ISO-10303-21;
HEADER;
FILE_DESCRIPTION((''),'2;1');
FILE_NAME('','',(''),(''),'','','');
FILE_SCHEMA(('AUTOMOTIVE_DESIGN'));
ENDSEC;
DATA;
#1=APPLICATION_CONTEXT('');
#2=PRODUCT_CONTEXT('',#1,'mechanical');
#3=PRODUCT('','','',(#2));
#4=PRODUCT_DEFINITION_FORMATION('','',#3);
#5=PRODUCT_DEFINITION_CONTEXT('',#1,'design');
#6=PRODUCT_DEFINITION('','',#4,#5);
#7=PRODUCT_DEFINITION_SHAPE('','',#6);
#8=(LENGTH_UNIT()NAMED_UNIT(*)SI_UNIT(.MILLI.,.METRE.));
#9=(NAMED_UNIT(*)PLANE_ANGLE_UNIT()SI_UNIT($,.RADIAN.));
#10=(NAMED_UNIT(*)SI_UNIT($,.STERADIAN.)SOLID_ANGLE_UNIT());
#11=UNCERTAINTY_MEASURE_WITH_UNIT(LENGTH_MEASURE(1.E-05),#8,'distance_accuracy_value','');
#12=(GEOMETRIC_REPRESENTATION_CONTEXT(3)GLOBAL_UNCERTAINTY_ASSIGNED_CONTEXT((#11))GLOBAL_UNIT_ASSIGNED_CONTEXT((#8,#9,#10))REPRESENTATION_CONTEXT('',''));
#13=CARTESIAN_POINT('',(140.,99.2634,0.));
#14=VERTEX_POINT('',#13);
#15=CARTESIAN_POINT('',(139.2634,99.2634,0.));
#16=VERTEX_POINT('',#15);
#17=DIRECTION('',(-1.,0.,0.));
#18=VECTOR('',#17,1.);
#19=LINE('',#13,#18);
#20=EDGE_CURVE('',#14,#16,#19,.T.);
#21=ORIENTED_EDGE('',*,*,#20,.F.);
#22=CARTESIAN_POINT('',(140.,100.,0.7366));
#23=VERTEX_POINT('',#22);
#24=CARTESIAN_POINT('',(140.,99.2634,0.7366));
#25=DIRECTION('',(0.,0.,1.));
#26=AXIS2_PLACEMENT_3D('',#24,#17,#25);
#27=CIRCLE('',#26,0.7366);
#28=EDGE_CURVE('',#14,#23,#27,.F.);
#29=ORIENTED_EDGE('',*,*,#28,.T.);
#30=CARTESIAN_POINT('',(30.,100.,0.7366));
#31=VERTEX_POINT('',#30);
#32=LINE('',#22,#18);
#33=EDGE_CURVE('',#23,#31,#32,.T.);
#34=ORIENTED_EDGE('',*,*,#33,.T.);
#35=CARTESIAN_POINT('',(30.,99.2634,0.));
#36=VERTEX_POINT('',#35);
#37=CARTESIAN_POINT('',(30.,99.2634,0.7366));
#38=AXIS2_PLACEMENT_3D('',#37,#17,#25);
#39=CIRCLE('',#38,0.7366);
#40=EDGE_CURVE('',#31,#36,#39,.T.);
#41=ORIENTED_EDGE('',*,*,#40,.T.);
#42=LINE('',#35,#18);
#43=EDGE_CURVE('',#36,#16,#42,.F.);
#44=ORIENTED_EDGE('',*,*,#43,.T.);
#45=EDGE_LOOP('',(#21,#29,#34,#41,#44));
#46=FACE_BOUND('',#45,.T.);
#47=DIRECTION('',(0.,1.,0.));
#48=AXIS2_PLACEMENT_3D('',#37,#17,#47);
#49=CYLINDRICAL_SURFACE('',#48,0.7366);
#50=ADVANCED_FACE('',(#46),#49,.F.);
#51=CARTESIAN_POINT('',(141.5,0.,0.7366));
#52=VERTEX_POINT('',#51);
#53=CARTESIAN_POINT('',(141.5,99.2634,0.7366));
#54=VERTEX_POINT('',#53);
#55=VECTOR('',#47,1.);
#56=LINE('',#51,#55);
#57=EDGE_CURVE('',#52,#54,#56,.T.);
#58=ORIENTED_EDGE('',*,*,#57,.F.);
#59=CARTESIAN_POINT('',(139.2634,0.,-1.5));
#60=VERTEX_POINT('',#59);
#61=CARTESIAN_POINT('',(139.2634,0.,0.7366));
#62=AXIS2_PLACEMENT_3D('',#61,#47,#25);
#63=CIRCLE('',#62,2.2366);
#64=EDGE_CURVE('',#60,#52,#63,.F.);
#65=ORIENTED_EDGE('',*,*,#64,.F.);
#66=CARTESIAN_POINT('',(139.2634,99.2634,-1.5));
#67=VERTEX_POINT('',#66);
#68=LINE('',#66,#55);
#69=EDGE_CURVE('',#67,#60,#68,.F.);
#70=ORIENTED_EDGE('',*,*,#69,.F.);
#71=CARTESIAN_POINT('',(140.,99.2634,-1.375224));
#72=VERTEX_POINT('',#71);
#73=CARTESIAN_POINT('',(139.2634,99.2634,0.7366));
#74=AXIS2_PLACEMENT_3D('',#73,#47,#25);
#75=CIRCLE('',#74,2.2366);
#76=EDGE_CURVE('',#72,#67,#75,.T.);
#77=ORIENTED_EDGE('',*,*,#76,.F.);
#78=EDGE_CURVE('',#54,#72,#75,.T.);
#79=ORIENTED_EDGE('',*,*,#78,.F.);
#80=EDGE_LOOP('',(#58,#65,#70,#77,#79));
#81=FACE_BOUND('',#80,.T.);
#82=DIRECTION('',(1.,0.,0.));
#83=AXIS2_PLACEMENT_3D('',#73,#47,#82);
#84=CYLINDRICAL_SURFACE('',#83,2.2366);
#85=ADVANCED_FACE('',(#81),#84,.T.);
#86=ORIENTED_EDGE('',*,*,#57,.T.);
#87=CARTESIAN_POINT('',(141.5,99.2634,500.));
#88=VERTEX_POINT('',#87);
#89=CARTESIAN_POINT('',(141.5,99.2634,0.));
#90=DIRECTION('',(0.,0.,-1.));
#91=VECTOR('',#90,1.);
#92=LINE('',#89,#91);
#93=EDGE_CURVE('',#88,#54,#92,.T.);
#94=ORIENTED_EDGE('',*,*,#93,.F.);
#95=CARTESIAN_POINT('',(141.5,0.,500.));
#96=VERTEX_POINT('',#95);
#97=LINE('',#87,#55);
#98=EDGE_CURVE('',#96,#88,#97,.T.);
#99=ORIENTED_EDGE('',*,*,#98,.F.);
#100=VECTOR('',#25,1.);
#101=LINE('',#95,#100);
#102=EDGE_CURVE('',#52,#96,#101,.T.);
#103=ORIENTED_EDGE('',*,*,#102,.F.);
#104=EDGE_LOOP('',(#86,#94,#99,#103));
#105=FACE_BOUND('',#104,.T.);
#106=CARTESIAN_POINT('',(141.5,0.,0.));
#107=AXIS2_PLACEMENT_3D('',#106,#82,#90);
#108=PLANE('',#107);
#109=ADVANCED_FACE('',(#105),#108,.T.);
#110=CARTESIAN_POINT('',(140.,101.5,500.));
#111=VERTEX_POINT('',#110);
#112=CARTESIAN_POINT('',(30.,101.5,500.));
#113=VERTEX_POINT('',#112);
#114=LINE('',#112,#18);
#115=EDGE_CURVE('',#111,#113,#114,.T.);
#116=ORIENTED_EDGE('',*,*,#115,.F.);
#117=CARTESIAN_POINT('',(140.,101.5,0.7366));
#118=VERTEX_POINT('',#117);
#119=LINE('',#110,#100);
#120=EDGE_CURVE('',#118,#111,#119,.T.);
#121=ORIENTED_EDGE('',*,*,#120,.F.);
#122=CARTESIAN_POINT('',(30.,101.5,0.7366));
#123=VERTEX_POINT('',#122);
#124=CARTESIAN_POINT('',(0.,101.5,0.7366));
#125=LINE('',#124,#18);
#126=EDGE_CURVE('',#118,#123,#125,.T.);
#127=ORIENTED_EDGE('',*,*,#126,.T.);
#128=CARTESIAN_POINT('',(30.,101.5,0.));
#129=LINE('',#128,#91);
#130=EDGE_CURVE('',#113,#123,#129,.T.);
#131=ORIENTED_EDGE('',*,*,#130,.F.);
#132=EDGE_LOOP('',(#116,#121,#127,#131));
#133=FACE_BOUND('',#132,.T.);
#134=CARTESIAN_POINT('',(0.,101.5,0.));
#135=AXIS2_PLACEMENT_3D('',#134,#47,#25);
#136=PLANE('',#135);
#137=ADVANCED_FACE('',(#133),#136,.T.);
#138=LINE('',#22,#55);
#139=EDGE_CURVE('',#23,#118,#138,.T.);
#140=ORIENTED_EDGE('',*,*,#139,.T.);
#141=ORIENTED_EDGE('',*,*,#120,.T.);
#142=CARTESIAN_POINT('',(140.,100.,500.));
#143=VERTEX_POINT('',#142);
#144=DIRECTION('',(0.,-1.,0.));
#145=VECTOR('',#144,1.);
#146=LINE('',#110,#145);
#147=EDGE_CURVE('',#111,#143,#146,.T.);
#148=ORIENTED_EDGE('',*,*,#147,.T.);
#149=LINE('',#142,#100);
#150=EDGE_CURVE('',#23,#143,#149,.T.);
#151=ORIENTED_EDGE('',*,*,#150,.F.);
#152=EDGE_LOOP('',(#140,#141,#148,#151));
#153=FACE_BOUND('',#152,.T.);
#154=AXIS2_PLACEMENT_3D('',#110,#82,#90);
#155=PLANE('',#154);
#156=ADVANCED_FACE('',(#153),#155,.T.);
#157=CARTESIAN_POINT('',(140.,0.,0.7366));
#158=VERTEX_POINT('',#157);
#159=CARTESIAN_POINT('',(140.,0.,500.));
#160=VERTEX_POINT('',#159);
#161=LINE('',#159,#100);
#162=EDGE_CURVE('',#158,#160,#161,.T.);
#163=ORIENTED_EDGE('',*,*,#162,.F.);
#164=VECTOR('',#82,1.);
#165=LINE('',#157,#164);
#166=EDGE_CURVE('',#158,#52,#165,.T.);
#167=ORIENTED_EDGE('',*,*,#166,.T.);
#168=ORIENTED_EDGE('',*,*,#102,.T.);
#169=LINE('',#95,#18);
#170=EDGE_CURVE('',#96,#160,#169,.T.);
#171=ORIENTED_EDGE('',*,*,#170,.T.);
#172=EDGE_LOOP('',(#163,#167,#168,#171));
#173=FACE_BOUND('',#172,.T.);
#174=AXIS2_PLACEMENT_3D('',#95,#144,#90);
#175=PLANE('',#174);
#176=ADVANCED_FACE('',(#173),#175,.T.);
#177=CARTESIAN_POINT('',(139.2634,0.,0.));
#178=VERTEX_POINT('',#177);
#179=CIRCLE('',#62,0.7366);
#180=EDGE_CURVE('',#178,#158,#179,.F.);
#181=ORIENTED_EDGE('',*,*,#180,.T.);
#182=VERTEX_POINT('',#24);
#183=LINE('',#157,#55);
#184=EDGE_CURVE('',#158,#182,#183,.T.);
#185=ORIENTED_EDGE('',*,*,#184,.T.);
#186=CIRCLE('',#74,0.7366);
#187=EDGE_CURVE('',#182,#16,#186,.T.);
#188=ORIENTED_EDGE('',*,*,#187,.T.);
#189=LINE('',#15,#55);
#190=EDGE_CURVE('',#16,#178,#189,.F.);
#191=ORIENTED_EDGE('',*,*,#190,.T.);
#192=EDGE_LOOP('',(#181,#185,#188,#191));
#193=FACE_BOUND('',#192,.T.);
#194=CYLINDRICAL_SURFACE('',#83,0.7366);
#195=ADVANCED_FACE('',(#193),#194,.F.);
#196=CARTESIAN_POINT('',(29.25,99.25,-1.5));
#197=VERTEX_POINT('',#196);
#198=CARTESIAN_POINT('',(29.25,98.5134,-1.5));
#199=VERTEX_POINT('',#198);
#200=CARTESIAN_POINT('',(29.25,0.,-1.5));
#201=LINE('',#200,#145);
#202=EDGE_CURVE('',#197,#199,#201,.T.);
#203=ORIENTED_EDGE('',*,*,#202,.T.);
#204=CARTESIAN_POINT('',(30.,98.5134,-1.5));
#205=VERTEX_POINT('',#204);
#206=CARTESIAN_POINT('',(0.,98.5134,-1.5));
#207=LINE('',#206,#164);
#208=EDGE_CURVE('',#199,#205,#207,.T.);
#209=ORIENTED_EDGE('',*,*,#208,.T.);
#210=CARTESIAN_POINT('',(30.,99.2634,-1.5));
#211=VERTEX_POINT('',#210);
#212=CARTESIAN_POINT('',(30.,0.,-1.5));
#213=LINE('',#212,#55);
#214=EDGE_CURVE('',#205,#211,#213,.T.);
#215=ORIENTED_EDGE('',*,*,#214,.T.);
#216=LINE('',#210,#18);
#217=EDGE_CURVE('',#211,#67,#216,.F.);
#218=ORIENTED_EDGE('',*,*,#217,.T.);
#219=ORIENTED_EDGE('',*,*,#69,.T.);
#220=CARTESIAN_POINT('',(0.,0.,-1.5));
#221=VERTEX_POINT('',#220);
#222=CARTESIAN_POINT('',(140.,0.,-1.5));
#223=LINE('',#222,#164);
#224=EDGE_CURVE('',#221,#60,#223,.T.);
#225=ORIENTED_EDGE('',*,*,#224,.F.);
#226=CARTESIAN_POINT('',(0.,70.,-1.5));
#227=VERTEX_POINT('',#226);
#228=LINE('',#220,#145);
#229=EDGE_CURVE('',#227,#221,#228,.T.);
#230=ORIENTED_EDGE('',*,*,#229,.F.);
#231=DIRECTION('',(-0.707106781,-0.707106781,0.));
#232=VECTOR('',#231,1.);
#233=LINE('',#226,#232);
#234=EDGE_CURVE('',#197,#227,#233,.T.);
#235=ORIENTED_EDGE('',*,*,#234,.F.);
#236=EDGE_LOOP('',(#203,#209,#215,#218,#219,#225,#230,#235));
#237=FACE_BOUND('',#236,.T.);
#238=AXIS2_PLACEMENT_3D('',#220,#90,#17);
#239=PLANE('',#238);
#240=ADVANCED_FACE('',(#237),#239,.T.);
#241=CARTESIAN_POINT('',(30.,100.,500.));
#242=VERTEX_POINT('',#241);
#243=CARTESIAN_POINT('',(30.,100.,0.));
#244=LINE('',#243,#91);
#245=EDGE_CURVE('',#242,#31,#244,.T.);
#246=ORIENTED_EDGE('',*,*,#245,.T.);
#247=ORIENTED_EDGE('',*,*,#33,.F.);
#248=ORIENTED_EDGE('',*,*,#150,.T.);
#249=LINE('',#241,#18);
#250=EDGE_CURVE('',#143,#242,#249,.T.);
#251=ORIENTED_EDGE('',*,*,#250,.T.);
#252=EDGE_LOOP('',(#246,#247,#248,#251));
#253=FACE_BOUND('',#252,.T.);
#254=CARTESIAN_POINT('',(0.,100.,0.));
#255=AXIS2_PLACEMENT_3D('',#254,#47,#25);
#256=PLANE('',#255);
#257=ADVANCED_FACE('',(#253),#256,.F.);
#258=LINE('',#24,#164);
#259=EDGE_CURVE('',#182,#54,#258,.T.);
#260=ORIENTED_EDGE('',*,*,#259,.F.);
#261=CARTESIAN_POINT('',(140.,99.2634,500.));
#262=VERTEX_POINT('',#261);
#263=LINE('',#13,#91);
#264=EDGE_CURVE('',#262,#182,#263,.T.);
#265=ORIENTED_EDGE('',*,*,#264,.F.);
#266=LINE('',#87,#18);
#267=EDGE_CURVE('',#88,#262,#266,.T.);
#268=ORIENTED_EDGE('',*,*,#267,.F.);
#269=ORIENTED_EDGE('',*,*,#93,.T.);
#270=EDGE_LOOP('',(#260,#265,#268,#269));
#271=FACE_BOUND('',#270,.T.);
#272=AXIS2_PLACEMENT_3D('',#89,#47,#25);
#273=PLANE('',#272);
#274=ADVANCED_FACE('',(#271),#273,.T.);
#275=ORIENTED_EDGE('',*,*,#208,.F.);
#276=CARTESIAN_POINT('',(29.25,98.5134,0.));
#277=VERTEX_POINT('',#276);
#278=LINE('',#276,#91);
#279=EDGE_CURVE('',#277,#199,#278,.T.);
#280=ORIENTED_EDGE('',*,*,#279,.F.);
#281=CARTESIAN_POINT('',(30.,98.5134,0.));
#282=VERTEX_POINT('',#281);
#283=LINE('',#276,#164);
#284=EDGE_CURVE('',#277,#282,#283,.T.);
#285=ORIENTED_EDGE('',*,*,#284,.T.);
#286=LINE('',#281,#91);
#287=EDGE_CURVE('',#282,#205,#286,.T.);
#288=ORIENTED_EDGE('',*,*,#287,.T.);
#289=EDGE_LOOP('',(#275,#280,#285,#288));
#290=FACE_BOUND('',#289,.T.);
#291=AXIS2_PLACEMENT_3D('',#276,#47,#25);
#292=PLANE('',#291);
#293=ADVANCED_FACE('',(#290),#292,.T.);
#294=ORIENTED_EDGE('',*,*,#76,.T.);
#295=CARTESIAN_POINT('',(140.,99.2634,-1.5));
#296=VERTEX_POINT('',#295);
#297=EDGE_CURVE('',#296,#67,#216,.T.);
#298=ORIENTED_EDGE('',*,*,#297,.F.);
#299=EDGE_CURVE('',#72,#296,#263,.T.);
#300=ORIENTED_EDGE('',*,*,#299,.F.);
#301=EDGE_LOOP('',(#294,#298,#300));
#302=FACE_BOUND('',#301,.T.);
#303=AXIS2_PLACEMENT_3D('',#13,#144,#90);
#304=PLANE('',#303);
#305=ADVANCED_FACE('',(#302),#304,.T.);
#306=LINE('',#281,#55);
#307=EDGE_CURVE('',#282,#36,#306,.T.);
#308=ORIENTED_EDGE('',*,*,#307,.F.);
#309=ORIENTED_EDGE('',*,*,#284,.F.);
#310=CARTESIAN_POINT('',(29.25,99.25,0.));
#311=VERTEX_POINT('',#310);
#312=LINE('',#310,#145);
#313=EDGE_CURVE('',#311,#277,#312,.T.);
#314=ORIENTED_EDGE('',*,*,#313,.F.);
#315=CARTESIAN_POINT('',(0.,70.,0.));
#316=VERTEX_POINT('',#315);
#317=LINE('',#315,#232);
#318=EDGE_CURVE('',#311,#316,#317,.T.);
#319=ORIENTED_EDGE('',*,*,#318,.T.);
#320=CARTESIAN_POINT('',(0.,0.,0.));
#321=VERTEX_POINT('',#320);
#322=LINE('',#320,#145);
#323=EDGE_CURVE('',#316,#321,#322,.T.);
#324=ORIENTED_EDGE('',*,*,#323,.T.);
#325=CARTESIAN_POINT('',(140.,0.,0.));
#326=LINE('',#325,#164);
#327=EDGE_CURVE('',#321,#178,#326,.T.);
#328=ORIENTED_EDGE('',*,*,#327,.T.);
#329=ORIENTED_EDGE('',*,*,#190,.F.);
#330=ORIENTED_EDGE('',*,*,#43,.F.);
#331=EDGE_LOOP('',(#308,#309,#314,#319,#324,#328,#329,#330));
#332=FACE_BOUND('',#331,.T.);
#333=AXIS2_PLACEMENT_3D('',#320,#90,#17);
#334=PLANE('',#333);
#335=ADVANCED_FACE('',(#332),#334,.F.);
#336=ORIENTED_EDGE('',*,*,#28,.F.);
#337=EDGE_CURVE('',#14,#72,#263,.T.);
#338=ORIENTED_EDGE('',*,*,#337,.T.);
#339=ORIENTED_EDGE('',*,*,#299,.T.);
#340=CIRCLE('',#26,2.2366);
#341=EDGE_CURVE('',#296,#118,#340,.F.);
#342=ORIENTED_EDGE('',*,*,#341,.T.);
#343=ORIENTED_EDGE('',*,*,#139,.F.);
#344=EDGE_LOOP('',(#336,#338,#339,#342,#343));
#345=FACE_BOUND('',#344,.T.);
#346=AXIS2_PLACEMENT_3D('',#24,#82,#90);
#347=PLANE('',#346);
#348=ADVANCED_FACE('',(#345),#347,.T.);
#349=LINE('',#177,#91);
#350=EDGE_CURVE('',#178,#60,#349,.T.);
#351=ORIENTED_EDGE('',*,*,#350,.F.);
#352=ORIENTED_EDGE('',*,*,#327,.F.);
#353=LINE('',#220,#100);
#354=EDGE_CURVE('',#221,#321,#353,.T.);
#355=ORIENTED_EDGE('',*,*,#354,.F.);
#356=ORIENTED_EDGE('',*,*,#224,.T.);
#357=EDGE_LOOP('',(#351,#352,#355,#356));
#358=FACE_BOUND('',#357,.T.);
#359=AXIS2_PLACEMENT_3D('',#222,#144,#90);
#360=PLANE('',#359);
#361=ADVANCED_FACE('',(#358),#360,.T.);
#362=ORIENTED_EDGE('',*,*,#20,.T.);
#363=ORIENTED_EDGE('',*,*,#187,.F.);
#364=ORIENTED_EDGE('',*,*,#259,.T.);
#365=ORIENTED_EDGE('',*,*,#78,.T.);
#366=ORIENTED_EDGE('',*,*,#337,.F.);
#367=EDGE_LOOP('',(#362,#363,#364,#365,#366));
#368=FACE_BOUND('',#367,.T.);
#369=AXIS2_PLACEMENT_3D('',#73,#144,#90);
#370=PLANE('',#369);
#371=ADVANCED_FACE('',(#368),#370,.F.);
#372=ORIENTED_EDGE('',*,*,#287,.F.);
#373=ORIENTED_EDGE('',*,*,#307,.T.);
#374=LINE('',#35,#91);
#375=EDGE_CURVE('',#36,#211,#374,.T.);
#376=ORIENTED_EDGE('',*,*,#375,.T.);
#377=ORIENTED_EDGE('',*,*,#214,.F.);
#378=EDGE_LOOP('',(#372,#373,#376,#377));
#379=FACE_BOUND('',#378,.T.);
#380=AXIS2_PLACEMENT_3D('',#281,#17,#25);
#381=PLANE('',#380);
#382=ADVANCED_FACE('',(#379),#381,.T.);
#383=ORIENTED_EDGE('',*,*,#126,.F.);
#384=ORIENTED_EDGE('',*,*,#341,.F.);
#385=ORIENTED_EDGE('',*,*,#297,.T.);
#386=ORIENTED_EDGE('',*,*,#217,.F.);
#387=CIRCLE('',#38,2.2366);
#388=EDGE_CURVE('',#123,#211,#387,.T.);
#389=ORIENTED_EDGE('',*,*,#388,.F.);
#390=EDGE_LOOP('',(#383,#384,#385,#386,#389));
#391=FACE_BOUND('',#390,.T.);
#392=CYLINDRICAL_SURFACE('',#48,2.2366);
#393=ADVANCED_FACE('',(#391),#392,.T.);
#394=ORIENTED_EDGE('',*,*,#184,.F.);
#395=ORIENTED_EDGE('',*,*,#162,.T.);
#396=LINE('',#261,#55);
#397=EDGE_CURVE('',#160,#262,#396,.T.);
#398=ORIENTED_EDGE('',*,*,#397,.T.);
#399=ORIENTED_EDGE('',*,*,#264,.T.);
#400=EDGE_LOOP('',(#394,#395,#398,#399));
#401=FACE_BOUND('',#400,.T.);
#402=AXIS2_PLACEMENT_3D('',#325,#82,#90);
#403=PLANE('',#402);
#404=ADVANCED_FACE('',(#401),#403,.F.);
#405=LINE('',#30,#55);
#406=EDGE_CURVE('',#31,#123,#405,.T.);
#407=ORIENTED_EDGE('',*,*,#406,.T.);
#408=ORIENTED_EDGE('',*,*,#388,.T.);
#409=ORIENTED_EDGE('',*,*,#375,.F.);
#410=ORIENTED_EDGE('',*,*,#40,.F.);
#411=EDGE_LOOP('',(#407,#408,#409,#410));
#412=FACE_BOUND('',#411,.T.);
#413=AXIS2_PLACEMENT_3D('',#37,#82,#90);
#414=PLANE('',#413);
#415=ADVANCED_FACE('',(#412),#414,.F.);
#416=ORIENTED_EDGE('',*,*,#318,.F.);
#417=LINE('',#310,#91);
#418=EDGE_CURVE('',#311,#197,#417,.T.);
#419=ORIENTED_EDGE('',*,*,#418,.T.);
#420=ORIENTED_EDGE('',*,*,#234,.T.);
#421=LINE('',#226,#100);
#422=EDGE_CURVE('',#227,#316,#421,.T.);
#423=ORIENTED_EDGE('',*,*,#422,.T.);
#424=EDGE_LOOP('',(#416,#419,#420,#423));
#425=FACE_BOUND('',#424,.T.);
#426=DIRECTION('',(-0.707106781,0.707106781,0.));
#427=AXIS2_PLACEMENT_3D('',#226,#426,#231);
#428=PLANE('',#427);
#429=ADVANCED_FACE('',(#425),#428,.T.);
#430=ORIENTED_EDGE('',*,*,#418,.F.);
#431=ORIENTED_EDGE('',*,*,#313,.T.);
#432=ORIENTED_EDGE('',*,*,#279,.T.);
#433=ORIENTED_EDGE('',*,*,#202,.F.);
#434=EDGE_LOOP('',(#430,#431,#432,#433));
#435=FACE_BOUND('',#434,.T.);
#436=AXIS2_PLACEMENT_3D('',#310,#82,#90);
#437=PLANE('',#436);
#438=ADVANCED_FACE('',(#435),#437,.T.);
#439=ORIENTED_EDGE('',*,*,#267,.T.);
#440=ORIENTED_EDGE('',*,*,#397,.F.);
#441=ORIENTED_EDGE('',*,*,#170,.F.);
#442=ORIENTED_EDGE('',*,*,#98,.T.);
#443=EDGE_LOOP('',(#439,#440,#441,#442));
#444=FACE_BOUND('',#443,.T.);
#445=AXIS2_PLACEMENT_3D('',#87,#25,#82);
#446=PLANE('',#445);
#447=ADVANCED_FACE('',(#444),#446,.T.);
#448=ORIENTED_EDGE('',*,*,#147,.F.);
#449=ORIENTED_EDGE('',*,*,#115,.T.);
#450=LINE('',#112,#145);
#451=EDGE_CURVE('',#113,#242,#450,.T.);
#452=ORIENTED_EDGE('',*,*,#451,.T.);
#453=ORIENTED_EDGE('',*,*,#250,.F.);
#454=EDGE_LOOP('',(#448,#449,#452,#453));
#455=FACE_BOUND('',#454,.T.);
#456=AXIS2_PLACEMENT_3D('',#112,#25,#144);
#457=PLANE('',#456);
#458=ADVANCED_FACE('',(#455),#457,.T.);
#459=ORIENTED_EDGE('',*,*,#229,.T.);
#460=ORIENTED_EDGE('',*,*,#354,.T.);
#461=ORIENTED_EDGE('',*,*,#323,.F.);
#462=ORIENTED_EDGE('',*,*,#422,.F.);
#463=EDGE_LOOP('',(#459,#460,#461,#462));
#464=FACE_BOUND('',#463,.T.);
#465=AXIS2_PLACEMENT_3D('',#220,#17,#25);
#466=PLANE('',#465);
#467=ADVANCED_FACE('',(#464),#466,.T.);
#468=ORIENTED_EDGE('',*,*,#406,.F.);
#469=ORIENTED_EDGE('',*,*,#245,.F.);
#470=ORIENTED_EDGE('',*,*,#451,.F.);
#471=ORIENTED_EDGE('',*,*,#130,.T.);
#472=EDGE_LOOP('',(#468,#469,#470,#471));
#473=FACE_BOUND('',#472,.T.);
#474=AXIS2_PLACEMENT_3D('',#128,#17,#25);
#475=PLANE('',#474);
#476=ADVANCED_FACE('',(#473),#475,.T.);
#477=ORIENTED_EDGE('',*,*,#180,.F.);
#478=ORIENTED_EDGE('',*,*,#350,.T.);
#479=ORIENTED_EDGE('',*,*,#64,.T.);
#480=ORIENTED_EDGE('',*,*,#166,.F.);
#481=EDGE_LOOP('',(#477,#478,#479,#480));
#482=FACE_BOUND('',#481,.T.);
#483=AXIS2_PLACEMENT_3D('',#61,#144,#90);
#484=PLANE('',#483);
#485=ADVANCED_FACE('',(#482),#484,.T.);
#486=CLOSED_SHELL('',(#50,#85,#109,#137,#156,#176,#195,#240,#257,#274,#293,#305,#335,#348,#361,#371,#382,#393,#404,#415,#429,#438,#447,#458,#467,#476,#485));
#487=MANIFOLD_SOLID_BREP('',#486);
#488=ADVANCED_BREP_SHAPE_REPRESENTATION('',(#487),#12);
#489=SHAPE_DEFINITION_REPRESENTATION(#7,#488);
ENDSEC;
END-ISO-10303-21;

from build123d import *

# Parameters (mm, degrees)
TABAN_FLAN_2_DEPTH            = 1.5
KENAR_FLAN_2_STRIP_W          = 7.4732
KENAR_FLAN_2_STRIP_H          = 1.5
KENAR_FLAN_2_STRIP_CUT_DEPTH  = 110
KENAR_FLAN_2_RELIEF_W         = 8.2232
KENAR_FLAN_2_RELIEF_H         = 0.75
KENAR_FLAN_2_RELIEF_CUT_DEPTH = 1.5
KENAR_FLAN_2_DEPTH            = 110
KENAR_FLAN_4_STRIP_W          = 7.4732
KENAR_FLAN_4_STRIP_H          = 1.5
KENAR_FLAN_4_STRIP_CUT_DEPTH  = 99.2634
KENAR_FLAN_4_DEPTH            = 99.2634


# Sheet-metal steps are written as plain solids
with BuildPart() as part:
    # Çizim1 → Taban-Flanş2 (new body)
    with BuildSketch(Plane.XY):
        Polygon((0, 0), (0, 70), (30, 100), (140, 100), (140, 0), align=None)
    extrude(amount=-TABAN_FLAN_2_DEPTH)

    # Kenar-Flanş2 strip (across the edge) → Kenar-Flanş2 strip cut (cut)
    with BuildSketch(Plane(origin=(140, 100, 0), x_dir=(0, -1, 0), z_dir=(-1, 0, 0))):
        with Locations((-3, -0.75)):
            Rectangle(KENAR_FLAN_2_STRIP_W, KENAR_FLAN_2_STRIP_H)
    extrude(amount=KENAR_FLAN_2_STRIP_CUT_DEPTH, mode=Mode.SUBTRACT)

    # Kenar-Flanş2 relief (on the sheet) → Kenar-Flanş2 relief cut (cut)
    with BuildSketch(Plane(origin=(140, 99.2634, 0), x_dir=(0, -1, 0), z_dir=(0, 0, 1))):
        with Locations((-3.3616, -110.375)):
            Rectangle(KENAR_FLAN_2_RELIEF_W, KENAR_FLAN_2_RELIEF_H)
    extrude(amount=-KENAR_FLAN_2_RELIEF_CUT_DEPTH, mode=Mode.SUBTRACT)

    # Kenar-Flanş2 section (across the edge) → Kenar-Flanş2 (add)
    with BuildSketch(Plane(origin=(140, 100, 0), x_dir=(0, -1, 0), z_dir=(-1, 0, 0))):
        with BuildLine():
            Line((-1.5, 0.7366), (-1.5, 500))
            Line((-1.5, 500), (0, 500))
            Line((0, 500), (0, 0.7366))
            ThreePointArc((0, 0.7366), (0.215745145, 0.215745145), (0.7366, 0))
            Line((0.7366, 0), (0.7366, -1.5))
            ThreePointArc((0.7366, -1.5), (-0.844915027, -0.844915027), (-1.5, 0.7366))
        make_face()
    extrude(amount=KENAR_FLAN_2_DEPTH)

    # Kenar-Flanş4 strip (across the edge) → Kenar-Flanş4 strip cut (cut)
    with BuildSketch(Plane(origin=(140, 0, 0), x_dir=(-1, 0, 0), z_dir=(0, 1, 0))):
        with Locations((-3, -0.75)):
            Rectangle(KENAR_FLAN_4_STRIP_W, KENAR_FLAN_4_STRIP_H)
    extrude(amount=KENAR_FLAN_4_STRIP_CUT_DEPTH, mode=Mode.SUBTRACT)

    # Kenar-Flanş4 section (across the edge) → Kenar-Flanş4 (add)
    with BuildSketch(Plane(origin=(140, 0, 0), x_dir=(-1, 0, 0), z_dir=(0, 1, 0))):
        with BuildLine():
            Line((-1.5, 0.7366), (-1.5, 500))
            Line((-1.5, 500), (0, 500))
            Line((0, 500), (0, 0.7366))
            ThreePointArc((0, 0.7366), (0.215745145, 0.215745145), (0.7366, 0))
            Line((0.7366, 0), (0.7366, -1.5))
            ThreePointArc((0.7366, -1.5), (-0.844915027, -0.844915027), (-1.5, 0.7366))
        make_face()
    extrude(amount=KENAR_FLAN_4_DEPTH)


solid = part.part
